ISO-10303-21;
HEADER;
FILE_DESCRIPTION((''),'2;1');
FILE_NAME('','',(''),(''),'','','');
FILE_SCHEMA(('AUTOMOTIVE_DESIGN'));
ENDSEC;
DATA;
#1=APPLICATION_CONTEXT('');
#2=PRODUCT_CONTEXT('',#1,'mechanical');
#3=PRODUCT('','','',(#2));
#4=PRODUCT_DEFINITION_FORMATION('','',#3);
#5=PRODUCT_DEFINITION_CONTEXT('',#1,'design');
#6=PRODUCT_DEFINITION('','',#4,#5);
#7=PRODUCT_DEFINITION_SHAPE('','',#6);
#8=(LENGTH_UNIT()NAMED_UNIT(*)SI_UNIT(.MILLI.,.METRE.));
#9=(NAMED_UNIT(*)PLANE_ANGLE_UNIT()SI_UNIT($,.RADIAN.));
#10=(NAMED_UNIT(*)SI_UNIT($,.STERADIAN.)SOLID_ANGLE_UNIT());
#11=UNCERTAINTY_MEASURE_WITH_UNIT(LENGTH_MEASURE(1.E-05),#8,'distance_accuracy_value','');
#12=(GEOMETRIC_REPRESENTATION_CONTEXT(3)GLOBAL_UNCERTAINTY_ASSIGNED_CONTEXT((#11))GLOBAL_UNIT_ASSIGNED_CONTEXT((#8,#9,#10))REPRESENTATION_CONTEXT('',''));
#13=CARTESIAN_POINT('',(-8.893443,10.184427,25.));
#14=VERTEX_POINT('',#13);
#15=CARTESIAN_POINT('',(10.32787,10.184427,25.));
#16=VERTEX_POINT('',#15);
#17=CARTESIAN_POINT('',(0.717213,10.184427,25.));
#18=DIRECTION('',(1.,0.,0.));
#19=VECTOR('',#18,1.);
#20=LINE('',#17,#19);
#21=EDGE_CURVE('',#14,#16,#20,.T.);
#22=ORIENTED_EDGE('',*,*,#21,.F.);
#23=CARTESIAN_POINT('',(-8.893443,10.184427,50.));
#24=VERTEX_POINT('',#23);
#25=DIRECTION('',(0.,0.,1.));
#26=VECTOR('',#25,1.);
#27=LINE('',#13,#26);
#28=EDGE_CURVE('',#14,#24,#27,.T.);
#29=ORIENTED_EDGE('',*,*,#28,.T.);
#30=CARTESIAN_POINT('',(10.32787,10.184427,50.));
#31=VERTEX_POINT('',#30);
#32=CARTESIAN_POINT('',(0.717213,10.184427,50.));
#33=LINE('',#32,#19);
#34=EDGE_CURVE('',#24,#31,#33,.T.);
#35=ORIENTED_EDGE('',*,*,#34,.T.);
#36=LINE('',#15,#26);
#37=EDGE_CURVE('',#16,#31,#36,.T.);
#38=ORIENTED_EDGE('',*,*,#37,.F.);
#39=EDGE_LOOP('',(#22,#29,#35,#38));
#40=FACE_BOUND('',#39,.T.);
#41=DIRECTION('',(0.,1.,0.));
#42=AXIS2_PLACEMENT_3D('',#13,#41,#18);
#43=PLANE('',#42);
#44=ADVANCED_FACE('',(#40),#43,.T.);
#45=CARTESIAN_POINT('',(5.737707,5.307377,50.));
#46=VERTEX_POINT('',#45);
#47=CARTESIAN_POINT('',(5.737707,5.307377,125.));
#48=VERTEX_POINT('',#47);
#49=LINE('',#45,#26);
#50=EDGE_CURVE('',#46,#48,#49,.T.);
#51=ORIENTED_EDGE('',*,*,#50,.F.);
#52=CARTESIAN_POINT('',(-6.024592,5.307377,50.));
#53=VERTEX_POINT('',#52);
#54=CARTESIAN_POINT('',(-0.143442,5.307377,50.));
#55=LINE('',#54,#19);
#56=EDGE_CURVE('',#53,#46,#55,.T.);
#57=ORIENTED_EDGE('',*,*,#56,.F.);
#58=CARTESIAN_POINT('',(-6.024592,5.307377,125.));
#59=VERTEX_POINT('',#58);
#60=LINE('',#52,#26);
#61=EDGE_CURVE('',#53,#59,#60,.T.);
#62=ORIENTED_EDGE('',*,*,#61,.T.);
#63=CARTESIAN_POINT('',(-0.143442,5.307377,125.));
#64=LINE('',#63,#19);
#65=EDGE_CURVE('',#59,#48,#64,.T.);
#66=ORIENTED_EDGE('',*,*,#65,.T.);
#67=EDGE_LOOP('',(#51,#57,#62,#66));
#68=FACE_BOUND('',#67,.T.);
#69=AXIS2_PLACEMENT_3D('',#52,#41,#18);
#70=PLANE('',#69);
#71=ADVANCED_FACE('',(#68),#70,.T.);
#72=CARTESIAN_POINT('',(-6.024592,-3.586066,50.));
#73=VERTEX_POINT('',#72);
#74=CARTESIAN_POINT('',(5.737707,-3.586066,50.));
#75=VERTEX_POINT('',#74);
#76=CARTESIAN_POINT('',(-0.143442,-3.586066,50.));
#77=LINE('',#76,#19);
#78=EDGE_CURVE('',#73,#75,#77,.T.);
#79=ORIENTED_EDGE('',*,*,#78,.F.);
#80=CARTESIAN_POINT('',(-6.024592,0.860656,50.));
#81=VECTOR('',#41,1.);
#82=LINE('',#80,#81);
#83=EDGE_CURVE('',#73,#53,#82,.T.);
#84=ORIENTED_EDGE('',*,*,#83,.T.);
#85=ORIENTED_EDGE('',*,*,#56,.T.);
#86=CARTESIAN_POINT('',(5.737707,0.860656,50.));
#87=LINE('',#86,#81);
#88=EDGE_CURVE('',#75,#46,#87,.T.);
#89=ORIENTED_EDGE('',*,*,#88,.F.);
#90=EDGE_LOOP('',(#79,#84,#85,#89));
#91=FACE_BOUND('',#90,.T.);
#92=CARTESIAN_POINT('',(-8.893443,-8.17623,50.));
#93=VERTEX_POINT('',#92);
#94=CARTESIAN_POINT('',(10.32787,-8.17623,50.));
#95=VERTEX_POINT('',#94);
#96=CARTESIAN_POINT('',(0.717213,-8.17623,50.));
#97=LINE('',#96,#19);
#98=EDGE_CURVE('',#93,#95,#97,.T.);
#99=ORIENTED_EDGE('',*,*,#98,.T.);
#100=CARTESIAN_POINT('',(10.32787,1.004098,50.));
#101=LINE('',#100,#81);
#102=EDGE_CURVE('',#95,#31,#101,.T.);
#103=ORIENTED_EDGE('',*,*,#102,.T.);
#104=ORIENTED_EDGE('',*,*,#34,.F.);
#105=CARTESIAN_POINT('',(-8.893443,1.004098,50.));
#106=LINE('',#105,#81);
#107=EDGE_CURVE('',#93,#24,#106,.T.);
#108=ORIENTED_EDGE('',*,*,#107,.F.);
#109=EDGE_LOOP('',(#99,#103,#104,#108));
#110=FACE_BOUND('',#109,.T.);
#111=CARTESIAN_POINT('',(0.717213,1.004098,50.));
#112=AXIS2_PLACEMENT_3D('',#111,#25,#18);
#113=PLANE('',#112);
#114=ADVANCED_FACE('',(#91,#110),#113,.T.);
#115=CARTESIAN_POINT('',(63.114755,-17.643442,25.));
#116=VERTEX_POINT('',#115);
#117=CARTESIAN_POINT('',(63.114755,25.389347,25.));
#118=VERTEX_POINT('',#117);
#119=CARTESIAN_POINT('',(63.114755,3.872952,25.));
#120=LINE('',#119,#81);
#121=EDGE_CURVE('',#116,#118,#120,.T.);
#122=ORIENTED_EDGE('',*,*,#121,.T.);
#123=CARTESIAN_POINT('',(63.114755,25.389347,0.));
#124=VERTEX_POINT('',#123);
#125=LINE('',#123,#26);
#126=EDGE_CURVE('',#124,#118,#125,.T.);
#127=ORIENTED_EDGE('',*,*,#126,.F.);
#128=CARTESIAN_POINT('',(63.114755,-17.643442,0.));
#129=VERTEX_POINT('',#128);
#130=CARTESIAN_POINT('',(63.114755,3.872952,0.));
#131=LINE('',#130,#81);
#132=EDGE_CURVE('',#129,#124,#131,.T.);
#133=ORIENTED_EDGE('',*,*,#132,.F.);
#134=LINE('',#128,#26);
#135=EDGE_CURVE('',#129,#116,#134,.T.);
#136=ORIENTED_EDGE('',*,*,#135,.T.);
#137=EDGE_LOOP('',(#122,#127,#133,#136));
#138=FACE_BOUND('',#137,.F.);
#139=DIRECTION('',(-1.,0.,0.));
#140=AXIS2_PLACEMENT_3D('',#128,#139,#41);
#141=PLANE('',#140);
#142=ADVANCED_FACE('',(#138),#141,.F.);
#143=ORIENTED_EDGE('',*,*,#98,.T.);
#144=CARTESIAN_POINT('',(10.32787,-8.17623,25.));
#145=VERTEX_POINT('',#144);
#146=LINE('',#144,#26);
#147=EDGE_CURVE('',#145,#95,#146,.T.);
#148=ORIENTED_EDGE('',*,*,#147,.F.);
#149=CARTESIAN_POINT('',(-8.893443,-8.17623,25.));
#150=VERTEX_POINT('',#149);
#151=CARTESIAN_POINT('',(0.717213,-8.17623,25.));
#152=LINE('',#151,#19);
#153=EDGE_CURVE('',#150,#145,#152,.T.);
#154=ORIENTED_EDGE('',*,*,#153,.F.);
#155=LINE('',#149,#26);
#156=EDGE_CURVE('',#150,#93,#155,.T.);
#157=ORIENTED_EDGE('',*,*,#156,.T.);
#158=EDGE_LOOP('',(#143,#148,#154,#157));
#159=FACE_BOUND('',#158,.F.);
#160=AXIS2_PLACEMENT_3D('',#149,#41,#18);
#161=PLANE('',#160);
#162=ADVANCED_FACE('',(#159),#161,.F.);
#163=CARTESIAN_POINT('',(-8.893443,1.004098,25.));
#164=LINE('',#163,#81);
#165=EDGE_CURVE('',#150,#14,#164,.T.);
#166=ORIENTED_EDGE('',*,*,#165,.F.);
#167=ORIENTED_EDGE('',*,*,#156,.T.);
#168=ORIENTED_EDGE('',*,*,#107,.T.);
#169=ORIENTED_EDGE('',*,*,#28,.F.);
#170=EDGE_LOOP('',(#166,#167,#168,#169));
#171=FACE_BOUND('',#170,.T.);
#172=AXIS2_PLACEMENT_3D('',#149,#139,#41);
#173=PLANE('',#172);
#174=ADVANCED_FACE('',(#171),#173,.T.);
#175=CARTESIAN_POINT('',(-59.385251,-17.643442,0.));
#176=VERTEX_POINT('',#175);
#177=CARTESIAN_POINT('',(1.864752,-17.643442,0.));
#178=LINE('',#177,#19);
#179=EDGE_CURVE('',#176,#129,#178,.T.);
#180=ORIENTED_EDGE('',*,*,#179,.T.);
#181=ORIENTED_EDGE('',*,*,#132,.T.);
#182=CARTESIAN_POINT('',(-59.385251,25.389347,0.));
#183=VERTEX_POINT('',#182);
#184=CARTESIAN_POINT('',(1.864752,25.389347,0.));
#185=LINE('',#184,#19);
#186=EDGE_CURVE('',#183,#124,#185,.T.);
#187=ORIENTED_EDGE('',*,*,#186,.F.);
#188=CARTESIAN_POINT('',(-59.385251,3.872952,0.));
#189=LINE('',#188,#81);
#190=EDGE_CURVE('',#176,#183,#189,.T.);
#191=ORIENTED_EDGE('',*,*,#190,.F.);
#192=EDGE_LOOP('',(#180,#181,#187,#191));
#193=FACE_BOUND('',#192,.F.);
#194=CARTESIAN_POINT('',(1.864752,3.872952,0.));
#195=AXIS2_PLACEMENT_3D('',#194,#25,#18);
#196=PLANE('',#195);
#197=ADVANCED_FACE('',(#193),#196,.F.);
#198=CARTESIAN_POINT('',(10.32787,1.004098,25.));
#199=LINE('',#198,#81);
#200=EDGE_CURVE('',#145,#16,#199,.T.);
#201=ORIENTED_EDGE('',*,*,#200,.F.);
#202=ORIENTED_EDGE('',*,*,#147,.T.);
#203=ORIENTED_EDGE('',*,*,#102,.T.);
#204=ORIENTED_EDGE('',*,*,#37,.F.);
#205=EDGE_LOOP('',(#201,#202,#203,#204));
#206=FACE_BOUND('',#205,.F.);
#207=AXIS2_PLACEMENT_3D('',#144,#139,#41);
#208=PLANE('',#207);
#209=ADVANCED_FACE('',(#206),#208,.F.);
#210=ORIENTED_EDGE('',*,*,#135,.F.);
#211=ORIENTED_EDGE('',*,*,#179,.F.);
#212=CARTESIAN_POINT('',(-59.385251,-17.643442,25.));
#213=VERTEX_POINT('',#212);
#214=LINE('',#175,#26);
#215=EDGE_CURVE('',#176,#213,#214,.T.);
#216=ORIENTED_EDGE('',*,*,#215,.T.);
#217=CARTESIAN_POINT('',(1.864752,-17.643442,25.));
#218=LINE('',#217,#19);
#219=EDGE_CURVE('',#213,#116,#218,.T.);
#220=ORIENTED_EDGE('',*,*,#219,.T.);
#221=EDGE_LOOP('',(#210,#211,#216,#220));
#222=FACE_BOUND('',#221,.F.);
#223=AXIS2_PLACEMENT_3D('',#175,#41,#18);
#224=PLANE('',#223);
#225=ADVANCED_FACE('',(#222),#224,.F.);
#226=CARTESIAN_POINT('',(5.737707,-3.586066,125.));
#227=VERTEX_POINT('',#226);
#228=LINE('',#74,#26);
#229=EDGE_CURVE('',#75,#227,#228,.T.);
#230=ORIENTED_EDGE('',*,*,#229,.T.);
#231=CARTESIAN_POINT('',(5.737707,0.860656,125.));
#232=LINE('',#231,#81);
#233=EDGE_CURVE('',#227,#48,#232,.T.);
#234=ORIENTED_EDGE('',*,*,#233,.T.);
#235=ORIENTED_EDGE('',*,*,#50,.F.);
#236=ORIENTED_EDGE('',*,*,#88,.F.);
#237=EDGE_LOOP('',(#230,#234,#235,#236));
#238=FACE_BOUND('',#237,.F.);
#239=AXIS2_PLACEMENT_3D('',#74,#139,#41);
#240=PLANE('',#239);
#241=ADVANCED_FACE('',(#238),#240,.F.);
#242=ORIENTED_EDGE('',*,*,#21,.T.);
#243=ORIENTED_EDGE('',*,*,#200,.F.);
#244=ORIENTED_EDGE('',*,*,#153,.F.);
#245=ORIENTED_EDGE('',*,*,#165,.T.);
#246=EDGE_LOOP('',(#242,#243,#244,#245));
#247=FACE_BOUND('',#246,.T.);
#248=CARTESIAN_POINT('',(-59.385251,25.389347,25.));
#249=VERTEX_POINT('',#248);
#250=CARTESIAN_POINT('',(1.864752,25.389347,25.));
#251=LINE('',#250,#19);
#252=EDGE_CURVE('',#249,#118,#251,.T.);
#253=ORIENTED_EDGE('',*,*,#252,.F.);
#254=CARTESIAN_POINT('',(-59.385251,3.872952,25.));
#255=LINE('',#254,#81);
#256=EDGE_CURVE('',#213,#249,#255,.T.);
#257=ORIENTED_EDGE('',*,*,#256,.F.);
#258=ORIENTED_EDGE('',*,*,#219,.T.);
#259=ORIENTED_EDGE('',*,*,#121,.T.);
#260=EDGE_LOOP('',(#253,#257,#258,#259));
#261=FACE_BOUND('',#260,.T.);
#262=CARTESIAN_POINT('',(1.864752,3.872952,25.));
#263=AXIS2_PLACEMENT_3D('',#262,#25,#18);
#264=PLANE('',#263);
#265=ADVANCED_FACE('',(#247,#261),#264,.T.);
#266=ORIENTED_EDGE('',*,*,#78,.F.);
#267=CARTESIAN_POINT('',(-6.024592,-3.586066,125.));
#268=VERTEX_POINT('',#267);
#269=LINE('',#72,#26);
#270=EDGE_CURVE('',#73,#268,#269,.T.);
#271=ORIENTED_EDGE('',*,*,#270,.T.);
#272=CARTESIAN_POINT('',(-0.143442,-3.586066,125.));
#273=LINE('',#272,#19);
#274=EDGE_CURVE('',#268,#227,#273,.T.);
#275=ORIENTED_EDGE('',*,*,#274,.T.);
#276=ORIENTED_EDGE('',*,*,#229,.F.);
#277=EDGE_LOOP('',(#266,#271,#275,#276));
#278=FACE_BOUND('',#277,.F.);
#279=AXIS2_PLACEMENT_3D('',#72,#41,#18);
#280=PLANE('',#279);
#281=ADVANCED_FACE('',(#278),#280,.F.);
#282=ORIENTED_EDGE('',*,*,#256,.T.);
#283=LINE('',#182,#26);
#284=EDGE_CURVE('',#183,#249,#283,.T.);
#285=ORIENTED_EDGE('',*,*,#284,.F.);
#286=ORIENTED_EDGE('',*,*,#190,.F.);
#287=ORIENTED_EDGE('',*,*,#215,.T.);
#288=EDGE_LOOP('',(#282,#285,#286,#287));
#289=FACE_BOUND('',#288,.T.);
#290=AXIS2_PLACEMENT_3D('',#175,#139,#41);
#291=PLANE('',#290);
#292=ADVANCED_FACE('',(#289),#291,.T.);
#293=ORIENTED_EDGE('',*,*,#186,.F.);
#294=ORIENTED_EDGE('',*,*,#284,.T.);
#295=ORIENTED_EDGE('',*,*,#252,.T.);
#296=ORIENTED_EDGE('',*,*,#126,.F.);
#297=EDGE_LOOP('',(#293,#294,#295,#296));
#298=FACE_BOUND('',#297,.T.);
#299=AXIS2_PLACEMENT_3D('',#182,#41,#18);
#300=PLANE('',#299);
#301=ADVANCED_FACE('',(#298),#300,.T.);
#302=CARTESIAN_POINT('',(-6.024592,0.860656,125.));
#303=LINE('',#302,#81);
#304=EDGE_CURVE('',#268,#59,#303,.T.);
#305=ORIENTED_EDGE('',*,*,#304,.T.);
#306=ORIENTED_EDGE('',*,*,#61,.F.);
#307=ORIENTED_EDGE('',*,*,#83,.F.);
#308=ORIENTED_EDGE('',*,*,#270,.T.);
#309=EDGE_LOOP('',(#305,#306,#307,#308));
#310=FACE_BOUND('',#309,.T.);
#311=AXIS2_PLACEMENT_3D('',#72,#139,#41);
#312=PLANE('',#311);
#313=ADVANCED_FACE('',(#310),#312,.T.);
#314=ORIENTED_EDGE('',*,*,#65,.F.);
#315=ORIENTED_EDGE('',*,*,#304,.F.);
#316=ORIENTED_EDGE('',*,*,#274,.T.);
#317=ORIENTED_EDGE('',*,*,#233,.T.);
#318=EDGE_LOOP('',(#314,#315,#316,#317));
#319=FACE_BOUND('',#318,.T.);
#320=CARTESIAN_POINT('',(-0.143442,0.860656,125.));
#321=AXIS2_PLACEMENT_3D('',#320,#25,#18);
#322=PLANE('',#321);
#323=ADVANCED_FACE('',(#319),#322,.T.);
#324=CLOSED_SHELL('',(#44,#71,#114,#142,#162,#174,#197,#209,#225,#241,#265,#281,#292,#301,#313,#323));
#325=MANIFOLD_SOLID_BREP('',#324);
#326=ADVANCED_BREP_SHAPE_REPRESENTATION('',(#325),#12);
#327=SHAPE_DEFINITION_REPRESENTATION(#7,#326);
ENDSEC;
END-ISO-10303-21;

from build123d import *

# Parameters (mm, degrees)
F0_W     = 122.5000061095
F0_H     = 43.0327896029
F1_DEPTH = 25
F2_W     = 19.2213132977
F2_H     = 18.3606566861
F3_DEPTH = 25
F5_W     = 11.7622986436
F5_H     = 8.8934430387
F6_DEPTH = 75


# Not quite as in the source:
# - the program builds the solid bodies; features that only make, move or delete a surface that nothing else refers to are left out


with BuildPart() as f1:
    # F0 (on Top) → F1 (new body)
    with BuildSketch(Plane.XY):
        with Locations((1.8647518009, 3.872952424)):
            Rectangle(F0_W, F0_H)
    extrude(amount=F1_DEPTH)

    # F2 (on face) → F3 (join)
    with BuildSketch(Plane.XY.offset(25)):
        with Locations((0.7172133774, 1.0040984489)):
            Rectangle(F2_W, F2_H)
    extrude(amount=F3_DEPTH)

    # F5 (on face) → F6 (join)
    with BuildSketch(Plane.XY.offset(50)):
        with Locations((-0.1434423029, 0.8606557967)):
            Rectangle(F5_W, F5_H)
    extrude(amount=F6_DEPTH)


solid = f1.part
